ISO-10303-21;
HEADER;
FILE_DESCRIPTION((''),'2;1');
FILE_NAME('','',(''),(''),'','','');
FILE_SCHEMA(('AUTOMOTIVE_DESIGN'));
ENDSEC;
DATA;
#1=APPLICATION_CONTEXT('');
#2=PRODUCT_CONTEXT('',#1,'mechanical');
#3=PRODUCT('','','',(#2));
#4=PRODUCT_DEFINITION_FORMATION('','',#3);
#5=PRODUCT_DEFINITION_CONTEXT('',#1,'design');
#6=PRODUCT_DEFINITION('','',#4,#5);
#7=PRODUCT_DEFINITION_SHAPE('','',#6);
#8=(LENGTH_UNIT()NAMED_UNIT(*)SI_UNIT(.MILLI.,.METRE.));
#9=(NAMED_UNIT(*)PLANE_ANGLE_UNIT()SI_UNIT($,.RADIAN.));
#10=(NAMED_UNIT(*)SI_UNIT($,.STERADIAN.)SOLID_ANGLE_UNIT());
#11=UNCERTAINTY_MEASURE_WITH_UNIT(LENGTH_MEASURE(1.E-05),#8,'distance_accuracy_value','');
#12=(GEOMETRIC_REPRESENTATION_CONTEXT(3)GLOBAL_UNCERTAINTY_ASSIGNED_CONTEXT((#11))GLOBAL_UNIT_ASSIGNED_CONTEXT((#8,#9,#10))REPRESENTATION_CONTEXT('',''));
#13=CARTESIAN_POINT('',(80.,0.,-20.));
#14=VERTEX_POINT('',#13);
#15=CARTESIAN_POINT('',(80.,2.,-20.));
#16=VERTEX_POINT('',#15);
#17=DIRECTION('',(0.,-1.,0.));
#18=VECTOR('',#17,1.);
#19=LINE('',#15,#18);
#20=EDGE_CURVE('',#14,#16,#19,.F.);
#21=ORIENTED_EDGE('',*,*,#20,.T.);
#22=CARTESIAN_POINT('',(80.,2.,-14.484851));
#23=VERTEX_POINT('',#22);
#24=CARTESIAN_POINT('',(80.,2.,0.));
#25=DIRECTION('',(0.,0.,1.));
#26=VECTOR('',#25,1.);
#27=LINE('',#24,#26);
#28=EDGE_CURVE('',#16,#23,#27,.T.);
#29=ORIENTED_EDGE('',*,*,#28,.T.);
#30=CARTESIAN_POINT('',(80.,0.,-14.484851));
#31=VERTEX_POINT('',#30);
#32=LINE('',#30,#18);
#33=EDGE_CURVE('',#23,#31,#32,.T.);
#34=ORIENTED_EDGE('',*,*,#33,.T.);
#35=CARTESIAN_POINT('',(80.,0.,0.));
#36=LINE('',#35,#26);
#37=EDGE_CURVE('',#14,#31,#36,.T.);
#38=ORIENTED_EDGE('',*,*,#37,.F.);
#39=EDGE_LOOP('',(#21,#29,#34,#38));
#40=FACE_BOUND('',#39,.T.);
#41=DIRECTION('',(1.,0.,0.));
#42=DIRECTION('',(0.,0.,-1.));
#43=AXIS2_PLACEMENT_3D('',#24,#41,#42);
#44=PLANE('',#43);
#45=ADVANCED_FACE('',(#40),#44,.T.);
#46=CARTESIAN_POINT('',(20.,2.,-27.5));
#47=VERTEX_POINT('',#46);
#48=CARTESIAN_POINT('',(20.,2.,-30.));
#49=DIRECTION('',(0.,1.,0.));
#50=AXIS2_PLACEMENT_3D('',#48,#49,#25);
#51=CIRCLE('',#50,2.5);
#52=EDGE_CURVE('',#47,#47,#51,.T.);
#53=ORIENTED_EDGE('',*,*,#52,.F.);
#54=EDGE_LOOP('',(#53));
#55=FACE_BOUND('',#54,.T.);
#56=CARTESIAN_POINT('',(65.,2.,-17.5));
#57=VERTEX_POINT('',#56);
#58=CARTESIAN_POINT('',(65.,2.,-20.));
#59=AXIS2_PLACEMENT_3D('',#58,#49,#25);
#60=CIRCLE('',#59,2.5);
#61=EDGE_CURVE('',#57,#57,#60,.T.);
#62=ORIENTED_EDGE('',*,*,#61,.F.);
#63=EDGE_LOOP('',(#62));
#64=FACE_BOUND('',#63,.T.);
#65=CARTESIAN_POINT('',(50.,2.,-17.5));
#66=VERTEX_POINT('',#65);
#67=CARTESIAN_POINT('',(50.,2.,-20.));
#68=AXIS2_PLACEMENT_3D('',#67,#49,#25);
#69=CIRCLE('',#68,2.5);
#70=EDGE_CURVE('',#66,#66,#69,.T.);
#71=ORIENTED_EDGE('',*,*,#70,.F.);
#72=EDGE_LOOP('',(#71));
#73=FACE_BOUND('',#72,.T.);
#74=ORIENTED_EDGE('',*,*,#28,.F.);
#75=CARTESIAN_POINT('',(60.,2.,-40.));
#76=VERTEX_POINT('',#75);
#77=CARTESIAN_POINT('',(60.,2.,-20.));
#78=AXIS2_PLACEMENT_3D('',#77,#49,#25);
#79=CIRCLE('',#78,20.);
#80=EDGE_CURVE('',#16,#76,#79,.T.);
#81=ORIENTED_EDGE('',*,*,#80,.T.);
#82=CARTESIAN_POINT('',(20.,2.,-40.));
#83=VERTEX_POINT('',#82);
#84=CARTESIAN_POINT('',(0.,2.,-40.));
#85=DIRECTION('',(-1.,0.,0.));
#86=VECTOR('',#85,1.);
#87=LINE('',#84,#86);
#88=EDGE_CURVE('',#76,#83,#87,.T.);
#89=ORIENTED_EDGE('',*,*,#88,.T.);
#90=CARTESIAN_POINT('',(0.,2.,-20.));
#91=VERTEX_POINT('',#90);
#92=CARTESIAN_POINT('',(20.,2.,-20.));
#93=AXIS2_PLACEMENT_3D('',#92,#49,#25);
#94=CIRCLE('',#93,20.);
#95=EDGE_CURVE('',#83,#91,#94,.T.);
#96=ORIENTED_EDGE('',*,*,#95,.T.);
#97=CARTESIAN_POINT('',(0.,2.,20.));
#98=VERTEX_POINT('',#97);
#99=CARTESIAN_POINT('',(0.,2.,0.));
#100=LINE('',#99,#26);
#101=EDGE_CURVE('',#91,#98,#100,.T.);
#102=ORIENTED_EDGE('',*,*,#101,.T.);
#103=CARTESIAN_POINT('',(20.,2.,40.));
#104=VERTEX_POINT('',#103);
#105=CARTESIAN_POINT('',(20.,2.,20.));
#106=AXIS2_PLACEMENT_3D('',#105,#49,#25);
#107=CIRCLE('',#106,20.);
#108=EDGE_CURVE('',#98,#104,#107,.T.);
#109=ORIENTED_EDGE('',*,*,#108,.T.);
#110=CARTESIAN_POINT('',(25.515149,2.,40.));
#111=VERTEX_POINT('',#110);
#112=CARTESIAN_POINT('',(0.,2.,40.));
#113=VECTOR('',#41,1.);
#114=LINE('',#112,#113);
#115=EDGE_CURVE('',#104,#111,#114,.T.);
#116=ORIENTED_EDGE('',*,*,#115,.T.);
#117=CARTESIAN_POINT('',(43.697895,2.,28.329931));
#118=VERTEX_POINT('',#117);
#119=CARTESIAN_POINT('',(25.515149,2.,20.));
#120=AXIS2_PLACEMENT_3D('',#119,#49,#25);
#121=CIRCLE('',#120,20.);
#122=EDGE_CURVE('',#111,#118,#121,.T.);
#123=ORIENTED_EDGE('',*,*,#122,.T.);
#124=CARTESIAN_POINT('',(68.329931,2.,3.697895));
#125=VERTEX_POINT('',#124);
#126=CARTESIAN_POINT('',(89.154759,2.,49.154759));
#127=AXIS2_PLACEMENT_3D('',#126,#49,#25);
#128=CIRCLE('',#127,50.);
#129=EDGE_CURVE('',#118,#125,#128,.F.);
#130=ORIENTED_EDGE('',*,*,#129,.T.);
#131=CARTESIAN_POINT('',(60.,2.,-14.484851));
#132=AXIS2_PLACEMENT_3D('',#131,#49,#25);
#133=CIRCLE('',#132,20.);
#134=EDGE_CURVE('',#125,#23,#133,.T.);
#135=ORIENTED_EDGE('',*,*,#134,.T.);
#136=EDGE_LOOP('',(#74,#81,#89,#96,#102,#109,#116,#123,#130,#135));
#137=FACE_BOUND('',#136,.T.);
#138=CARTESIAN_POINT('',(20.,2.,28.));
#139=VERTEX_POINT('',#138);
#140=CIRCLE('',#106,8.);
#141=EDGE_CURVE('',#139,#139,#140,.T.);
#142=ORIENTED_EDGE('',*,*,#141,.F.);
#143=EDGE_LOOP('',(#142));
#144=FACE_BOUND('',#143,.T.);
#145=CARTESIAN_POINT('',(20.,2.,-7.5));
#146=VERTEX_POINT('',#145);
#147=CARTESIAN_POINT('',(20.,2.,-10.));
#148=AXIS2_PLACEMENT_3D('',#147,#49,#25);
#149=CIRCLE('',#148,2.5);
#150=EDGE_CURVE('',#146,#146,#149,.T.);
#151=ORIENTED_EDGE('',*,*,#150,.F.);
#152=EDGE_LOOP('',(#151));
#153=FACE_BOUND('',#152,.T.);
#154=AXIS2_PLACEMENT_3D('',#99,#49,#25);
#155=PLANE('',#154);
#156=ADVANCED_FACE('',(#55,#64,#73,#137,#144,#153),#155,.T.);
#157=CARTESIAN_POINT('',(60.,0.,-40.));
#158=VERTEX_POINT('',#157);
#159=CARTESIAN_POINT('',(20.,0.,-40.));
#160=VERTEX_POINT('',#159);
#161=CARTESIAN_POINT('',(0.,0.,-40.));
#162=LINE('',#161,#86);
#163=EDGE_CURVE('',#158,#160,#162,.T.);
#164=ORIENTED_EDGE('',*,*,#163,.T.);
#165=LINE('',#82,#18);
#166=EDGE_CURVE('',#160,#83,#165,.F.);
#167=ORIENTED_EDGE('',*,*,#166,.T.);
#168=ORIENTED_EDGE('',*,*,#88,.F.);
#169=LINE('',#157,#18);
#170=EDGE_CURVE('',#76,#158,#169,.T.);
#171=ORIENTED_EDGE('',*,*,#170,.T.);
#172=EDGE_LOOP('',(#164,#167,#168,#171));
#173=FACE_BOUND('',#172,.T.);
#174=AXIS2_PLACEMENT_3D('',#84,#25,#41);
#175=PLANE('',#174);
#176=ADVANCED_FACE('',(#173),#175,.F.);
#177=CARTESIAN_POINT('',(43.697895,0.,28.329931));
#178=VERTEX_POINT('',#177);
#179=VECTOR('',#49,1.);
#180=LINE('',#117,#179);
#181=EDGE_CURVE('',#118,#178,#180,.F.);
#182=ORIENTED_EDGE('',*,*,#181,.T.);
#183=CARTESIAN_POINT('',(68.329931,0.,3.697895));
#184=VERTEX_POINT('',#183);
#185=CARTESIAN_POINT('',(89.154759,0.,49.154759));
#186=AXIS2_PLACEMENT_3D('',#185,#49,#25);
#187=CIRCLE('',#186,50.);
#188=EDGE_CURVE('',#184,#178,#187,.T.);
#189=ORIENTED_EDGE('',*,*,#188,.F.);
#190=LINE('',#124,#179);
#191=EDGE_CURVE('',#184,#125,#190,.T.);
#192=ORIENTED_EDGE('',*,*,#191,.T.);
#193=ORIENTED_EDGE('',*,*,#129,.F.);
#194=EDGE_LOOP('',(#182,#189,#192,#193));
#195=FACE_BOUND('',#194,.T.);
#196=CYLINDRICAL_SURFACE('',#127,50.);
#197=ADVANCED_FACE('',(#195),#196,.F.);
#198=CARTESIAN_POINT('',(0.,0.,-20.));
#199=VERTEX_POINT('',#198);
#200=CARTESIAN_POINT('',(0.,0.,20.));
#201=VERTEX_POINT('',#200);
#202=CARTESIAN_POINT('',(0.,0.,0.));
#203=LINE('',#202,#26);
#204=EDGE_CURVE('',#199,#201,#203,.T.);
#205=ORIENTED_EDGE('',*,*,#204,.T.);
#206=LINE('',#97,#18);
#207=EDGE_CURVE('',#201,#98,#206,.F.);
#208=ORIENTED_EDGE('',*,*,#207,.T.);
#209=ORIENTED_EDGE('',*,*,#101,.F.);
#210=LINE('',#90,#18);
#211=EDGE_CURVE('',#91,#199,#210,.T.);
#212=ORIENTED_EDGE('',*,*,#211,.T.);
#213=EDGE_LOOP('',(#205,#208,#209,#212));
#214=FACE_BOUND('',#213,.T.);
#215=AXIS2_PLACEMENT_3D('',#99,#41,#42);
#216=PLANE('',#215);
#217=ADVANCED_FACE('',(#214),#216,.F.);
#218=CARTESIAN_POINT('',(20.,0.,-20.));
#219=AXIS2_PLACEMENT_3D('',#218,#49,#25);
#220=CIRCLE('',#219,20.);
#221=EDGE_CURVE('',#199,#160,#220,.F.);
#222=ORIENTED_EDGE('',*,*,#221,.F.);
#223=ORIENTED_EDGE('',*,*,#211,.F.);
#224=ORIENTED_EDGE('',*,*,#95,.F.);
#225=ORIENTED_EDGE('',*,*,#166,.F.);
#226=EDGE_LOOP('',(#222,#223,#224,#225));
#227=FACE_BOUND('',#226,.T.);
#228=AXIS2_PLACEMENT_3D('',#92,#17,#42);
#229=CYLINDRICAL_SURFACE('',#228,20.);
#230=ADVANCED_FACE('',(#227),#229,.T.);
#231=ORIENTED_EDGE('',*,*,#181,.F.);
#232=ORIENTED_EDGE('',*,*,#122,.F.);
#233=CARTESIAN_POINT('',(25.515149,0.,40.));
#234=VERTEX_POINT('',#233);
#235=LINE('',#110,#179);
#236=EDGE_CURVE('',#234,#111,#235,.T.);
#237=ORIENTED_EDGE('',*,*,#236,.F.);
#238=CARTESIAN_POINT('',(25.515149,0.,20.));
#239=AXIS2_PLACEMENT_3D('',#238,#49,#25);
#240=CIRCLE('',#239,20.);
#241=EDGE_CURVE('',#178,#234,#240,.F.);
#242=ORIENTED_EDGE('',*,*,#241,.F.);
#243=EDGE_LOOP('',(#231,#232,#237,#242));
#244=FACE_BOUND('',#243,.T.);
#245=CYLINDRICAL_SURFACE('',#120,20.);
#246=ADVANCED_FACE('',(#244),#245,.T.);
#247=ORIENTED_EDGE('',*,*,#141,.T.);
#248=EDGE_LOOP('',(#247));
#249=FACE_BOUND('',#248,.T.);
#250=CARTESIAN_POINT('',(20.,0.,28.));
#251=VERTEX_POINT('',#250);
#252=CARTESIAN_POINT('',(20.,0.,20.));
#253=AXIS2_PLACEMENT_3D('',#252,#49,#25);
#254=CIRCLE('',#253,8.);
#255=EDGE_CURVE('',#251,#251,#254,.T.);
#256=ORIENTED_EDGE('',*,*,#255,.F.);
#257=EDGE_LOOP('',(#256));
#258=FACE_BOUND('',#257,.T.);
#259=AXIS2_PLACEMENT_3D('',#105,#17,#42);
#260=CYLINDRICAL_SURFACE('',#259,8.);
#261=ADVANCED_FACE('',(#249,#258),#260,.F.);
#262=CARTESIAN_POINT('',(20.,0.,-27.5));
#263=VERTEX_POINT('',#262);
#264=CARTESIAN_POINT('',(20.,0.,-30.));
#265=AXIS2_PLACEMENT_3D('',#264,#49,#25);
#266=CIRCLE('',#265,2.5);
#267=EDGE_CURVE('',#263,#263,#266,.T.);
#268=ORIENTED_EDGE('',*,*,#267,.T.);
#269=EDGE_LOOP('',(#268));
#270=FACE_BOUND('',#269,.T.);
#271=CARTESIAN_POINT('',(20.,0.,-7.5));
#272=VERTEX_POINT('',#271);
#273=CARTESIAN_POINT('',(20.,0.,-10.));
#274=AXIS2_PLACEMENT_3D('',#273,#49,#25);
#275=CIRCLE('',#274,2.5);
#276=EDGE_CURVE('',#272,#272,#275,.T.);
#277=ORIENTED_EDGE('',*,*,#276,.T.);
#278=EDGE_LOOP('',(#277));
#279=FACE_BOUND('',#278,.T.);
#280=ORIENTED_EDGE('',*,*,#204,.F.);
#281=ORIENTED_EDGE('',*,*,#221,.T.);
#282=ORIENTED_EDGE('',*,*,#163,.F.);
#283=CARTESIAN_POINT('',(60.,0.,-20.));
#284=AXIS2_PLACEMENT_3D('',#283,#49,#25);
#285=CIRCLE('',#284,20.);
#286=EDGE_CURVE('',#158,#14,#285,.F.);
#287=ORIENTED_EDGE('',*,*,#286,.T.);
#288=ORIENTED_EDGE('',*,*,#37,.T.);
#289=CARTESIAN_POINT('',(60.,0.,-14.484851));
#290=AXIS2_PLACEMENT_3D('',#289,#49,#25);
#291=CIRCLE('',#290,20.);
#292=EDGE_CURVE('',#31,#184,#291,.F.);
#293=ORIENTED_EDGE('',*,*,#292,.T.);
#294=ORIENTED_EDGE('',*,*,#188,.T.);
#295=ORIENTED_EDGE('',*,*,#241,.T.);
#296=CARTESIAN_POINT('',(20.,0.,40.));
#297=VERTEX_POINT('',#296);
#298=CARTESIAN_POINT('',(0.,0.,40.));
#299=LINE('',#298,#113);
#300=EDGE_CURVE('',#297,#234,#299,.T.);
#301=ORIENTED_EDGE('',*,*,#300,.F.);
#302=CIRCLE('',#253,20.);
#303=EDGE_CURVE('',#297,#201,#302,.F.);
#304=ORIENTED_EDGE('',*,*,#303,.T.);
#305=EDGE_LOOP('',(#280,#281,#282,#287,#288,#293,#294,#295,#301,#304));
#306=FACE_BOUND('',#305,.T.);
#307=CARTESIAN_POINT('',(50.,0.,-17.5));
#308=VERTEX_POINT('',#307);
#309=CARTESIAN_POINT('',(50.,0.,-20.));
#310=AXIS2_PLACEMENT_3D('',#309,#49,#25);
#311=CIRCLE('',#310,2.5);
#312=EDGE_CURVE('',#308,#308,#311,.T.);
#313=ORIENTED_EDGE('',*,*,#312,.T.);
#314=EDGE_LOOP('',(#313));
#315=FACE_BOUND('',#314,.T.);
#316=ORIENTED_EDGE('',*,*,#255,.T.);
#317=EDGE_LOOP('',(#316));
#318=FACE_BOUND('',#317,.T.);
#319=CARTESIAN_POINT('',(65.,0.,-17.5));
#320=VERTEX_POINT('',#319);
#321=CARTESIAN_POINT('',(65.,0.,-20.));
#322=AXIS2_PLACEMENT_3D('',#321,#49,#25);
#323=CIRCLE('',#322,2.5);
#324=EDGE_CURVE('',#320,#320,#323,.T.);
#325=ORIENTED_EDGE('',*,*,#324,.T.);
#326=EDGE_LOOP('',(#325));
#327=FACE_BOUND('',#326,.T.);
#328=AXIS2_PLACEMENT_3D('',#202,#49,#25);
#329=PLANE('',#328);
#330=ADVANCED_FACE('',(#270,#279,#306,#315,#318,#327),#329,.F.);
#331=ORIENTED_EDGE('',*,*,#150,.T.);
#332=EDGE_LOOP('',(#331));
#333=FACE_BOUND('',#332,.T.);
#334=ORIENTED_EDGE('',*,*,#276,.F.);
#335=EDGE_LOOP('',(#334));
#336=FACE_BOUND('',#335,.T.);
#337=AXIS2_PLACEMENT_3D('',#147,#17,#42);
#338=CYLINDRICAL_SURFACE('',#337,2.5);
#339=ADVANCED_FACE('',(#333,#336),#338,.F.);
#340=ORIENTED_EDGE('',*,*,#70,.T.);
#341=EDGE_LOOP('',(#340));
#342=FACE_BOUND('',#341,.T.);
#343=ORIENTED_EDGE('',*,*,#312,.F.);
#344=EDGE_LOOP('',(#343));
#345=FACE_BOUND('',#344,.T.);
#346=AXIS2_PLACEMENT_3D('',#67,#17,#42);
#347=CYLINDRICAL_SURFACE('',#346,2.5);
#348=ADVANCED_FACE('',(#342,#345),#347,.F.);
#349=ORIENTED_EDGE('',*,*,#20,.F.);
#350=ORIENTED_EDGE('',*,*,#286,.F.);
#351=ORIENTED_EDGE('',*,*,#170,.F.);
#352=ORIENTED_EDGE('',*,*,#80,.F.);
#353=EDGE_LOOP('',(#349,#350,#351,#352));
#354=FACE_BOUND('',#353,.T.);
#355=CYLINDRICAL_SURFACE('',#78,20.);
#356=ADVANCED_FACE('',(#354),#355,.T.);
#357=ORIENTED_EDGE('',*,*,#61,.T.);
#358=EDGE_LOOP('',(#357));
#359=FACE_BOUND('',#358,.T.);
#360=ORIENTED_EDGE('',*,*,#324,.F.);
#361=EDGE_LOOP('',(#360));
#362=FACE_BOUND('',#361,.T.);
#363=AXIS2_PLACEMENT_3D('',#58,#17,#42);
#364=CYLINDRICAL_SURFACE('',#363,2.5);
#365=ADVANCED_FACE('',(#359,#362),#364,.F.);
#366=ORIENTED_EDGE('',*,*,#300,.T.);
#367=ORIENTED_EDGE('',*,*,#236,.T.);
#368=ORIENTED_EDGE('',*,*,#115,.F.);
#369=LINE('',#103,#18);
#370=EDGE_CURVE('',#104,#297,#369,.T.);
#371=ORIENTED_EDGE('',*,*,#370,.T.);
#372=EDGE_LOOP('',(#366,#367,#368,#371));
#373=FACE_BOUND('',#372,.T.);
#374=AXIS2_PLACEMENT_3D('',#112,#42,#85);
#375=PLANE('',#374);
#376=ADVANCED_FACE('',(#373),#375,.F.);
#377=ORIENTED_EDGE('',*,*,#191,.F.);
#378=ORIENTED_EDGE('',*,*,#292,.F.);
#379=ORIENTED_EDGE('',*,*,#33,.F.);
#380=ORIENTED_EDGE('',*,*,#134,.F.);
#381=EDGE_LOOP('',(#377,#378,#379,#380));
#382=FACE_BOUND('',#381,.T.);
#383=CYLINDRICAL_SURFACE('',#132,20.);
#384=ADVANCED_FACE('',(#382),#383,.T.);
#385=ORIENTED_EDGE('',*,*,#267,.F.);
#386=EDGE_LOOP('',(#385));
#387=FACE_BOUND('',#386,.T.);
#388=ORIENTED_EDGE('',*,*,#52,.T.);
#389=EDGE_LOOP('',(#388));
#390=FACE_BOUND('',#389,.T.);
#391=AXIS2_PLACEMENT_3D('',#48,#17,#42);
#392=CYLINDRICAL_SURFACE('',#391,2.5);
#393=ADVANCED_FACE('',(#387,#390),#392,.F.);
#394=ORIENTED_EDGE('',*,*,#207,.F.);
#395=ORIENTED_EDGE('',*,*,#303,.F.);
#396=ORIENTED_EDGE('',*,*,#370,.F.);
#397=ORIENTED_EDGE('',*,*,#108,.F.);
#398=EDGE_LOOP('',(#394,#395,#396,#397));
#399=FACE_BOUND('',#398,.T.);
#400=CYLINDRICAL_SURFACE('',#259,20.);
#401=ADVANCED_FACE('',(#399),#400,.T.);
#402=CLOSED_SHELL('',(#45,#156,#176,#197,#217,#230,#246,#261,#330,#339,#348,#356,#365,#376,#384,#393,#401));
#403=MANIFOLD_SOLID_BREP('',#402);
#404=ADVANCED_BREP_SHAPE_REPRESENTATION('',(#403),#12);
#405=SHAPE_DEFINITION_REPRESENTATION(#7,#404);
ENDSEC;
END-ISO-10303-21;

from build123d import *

# Parameters (mm, degrees)
SKETCH1_R           = 2.5
SKETCH1_W           = 40
SKETCH1_H           = 40
SKETCH1_R_2         = 8
BOSS_EXTRUDE1_DEPTH = 2
FILLET1_R           = 50
FILLET2_R           = 20


with BuildPart() as part:
    # Sketch1 → Boss-Extrude1 (new body)
    # profile 1 of 2: a face of its own
    with BuildSketch(Plane(origin=(0, 0, 0), x_dir=(1, 0, 0), z_dir=(0, 1, 0))):
        Polygon((80, 0), (80, 40), (0, 40), (0, 0), (40, 0), align=None)
        with Locations(Location((20, 10, 0), (0, 0, 270))):
            Circle(SKETCH1_R, mode=Mode.SUBTRACT)
        with Locations(Location((20, 30, 0), (0, 0, 270))):
            Circle(SKETCH1_R, mode=Mode.SUBTRACT)
        with Locations(Location((50, 20, 0), (0, 0, 270))):
            Circle(SKETCH1_R, mode=Mode.SUBTRACT)
        with Locations(Location((65, 20, 0), (0, 0, 270))):
            Circle(SKETCH1_R, mode=Mode.SUBTRACT)
    # profile 2 of 2: a face of its own
    with BuildSketch(Plane(origin=(0, 0, 0), x_dir=(1, 0, 0), z_dir=(0, 1, 0))):
        with Locations((20, -20)):
            Rectangle(SKETCH1_W, SKETCH1_H)
        with Locations(Location((20, -20, 0), (0, 0, 270))):
            Circle(SKETCH1_R_2, mode=Mode.SUBTRACT)
    extrude(amount=BOSS_EXTRUDE1_DEPTH)

    # Fillet1
    # the kernel refuses this fillet: 50 mm, written as the material it adds along each edge
    with BuildSketch(Plane(origin=(40, 0, 0), x_dir=(0, 0, 1), z_dir=(0, 1, 0))) as fillet1_piece_1:
        with BuildLine():
            CenterArc((49.154759474, 49.154759474), FILLET1_R, 190.550098012, 68.899803976)
            Line((0, 40), (0, 0))
            Line((0, 0), (40, 0))
        make_face()
    extrude(amount=2)

    # Fillet2
    fillet2_edges = [part.edges().sort_by_distance(p)[0] for p in [
        (80, 1, -40),
        (80, 1, 0),
        (40, 1, 40),
        (0, 1, 40),
        (0, 1, -40),
    ]]
    fillet(fillet2_edges, radius=FILLET2_R)


solid = part.part
